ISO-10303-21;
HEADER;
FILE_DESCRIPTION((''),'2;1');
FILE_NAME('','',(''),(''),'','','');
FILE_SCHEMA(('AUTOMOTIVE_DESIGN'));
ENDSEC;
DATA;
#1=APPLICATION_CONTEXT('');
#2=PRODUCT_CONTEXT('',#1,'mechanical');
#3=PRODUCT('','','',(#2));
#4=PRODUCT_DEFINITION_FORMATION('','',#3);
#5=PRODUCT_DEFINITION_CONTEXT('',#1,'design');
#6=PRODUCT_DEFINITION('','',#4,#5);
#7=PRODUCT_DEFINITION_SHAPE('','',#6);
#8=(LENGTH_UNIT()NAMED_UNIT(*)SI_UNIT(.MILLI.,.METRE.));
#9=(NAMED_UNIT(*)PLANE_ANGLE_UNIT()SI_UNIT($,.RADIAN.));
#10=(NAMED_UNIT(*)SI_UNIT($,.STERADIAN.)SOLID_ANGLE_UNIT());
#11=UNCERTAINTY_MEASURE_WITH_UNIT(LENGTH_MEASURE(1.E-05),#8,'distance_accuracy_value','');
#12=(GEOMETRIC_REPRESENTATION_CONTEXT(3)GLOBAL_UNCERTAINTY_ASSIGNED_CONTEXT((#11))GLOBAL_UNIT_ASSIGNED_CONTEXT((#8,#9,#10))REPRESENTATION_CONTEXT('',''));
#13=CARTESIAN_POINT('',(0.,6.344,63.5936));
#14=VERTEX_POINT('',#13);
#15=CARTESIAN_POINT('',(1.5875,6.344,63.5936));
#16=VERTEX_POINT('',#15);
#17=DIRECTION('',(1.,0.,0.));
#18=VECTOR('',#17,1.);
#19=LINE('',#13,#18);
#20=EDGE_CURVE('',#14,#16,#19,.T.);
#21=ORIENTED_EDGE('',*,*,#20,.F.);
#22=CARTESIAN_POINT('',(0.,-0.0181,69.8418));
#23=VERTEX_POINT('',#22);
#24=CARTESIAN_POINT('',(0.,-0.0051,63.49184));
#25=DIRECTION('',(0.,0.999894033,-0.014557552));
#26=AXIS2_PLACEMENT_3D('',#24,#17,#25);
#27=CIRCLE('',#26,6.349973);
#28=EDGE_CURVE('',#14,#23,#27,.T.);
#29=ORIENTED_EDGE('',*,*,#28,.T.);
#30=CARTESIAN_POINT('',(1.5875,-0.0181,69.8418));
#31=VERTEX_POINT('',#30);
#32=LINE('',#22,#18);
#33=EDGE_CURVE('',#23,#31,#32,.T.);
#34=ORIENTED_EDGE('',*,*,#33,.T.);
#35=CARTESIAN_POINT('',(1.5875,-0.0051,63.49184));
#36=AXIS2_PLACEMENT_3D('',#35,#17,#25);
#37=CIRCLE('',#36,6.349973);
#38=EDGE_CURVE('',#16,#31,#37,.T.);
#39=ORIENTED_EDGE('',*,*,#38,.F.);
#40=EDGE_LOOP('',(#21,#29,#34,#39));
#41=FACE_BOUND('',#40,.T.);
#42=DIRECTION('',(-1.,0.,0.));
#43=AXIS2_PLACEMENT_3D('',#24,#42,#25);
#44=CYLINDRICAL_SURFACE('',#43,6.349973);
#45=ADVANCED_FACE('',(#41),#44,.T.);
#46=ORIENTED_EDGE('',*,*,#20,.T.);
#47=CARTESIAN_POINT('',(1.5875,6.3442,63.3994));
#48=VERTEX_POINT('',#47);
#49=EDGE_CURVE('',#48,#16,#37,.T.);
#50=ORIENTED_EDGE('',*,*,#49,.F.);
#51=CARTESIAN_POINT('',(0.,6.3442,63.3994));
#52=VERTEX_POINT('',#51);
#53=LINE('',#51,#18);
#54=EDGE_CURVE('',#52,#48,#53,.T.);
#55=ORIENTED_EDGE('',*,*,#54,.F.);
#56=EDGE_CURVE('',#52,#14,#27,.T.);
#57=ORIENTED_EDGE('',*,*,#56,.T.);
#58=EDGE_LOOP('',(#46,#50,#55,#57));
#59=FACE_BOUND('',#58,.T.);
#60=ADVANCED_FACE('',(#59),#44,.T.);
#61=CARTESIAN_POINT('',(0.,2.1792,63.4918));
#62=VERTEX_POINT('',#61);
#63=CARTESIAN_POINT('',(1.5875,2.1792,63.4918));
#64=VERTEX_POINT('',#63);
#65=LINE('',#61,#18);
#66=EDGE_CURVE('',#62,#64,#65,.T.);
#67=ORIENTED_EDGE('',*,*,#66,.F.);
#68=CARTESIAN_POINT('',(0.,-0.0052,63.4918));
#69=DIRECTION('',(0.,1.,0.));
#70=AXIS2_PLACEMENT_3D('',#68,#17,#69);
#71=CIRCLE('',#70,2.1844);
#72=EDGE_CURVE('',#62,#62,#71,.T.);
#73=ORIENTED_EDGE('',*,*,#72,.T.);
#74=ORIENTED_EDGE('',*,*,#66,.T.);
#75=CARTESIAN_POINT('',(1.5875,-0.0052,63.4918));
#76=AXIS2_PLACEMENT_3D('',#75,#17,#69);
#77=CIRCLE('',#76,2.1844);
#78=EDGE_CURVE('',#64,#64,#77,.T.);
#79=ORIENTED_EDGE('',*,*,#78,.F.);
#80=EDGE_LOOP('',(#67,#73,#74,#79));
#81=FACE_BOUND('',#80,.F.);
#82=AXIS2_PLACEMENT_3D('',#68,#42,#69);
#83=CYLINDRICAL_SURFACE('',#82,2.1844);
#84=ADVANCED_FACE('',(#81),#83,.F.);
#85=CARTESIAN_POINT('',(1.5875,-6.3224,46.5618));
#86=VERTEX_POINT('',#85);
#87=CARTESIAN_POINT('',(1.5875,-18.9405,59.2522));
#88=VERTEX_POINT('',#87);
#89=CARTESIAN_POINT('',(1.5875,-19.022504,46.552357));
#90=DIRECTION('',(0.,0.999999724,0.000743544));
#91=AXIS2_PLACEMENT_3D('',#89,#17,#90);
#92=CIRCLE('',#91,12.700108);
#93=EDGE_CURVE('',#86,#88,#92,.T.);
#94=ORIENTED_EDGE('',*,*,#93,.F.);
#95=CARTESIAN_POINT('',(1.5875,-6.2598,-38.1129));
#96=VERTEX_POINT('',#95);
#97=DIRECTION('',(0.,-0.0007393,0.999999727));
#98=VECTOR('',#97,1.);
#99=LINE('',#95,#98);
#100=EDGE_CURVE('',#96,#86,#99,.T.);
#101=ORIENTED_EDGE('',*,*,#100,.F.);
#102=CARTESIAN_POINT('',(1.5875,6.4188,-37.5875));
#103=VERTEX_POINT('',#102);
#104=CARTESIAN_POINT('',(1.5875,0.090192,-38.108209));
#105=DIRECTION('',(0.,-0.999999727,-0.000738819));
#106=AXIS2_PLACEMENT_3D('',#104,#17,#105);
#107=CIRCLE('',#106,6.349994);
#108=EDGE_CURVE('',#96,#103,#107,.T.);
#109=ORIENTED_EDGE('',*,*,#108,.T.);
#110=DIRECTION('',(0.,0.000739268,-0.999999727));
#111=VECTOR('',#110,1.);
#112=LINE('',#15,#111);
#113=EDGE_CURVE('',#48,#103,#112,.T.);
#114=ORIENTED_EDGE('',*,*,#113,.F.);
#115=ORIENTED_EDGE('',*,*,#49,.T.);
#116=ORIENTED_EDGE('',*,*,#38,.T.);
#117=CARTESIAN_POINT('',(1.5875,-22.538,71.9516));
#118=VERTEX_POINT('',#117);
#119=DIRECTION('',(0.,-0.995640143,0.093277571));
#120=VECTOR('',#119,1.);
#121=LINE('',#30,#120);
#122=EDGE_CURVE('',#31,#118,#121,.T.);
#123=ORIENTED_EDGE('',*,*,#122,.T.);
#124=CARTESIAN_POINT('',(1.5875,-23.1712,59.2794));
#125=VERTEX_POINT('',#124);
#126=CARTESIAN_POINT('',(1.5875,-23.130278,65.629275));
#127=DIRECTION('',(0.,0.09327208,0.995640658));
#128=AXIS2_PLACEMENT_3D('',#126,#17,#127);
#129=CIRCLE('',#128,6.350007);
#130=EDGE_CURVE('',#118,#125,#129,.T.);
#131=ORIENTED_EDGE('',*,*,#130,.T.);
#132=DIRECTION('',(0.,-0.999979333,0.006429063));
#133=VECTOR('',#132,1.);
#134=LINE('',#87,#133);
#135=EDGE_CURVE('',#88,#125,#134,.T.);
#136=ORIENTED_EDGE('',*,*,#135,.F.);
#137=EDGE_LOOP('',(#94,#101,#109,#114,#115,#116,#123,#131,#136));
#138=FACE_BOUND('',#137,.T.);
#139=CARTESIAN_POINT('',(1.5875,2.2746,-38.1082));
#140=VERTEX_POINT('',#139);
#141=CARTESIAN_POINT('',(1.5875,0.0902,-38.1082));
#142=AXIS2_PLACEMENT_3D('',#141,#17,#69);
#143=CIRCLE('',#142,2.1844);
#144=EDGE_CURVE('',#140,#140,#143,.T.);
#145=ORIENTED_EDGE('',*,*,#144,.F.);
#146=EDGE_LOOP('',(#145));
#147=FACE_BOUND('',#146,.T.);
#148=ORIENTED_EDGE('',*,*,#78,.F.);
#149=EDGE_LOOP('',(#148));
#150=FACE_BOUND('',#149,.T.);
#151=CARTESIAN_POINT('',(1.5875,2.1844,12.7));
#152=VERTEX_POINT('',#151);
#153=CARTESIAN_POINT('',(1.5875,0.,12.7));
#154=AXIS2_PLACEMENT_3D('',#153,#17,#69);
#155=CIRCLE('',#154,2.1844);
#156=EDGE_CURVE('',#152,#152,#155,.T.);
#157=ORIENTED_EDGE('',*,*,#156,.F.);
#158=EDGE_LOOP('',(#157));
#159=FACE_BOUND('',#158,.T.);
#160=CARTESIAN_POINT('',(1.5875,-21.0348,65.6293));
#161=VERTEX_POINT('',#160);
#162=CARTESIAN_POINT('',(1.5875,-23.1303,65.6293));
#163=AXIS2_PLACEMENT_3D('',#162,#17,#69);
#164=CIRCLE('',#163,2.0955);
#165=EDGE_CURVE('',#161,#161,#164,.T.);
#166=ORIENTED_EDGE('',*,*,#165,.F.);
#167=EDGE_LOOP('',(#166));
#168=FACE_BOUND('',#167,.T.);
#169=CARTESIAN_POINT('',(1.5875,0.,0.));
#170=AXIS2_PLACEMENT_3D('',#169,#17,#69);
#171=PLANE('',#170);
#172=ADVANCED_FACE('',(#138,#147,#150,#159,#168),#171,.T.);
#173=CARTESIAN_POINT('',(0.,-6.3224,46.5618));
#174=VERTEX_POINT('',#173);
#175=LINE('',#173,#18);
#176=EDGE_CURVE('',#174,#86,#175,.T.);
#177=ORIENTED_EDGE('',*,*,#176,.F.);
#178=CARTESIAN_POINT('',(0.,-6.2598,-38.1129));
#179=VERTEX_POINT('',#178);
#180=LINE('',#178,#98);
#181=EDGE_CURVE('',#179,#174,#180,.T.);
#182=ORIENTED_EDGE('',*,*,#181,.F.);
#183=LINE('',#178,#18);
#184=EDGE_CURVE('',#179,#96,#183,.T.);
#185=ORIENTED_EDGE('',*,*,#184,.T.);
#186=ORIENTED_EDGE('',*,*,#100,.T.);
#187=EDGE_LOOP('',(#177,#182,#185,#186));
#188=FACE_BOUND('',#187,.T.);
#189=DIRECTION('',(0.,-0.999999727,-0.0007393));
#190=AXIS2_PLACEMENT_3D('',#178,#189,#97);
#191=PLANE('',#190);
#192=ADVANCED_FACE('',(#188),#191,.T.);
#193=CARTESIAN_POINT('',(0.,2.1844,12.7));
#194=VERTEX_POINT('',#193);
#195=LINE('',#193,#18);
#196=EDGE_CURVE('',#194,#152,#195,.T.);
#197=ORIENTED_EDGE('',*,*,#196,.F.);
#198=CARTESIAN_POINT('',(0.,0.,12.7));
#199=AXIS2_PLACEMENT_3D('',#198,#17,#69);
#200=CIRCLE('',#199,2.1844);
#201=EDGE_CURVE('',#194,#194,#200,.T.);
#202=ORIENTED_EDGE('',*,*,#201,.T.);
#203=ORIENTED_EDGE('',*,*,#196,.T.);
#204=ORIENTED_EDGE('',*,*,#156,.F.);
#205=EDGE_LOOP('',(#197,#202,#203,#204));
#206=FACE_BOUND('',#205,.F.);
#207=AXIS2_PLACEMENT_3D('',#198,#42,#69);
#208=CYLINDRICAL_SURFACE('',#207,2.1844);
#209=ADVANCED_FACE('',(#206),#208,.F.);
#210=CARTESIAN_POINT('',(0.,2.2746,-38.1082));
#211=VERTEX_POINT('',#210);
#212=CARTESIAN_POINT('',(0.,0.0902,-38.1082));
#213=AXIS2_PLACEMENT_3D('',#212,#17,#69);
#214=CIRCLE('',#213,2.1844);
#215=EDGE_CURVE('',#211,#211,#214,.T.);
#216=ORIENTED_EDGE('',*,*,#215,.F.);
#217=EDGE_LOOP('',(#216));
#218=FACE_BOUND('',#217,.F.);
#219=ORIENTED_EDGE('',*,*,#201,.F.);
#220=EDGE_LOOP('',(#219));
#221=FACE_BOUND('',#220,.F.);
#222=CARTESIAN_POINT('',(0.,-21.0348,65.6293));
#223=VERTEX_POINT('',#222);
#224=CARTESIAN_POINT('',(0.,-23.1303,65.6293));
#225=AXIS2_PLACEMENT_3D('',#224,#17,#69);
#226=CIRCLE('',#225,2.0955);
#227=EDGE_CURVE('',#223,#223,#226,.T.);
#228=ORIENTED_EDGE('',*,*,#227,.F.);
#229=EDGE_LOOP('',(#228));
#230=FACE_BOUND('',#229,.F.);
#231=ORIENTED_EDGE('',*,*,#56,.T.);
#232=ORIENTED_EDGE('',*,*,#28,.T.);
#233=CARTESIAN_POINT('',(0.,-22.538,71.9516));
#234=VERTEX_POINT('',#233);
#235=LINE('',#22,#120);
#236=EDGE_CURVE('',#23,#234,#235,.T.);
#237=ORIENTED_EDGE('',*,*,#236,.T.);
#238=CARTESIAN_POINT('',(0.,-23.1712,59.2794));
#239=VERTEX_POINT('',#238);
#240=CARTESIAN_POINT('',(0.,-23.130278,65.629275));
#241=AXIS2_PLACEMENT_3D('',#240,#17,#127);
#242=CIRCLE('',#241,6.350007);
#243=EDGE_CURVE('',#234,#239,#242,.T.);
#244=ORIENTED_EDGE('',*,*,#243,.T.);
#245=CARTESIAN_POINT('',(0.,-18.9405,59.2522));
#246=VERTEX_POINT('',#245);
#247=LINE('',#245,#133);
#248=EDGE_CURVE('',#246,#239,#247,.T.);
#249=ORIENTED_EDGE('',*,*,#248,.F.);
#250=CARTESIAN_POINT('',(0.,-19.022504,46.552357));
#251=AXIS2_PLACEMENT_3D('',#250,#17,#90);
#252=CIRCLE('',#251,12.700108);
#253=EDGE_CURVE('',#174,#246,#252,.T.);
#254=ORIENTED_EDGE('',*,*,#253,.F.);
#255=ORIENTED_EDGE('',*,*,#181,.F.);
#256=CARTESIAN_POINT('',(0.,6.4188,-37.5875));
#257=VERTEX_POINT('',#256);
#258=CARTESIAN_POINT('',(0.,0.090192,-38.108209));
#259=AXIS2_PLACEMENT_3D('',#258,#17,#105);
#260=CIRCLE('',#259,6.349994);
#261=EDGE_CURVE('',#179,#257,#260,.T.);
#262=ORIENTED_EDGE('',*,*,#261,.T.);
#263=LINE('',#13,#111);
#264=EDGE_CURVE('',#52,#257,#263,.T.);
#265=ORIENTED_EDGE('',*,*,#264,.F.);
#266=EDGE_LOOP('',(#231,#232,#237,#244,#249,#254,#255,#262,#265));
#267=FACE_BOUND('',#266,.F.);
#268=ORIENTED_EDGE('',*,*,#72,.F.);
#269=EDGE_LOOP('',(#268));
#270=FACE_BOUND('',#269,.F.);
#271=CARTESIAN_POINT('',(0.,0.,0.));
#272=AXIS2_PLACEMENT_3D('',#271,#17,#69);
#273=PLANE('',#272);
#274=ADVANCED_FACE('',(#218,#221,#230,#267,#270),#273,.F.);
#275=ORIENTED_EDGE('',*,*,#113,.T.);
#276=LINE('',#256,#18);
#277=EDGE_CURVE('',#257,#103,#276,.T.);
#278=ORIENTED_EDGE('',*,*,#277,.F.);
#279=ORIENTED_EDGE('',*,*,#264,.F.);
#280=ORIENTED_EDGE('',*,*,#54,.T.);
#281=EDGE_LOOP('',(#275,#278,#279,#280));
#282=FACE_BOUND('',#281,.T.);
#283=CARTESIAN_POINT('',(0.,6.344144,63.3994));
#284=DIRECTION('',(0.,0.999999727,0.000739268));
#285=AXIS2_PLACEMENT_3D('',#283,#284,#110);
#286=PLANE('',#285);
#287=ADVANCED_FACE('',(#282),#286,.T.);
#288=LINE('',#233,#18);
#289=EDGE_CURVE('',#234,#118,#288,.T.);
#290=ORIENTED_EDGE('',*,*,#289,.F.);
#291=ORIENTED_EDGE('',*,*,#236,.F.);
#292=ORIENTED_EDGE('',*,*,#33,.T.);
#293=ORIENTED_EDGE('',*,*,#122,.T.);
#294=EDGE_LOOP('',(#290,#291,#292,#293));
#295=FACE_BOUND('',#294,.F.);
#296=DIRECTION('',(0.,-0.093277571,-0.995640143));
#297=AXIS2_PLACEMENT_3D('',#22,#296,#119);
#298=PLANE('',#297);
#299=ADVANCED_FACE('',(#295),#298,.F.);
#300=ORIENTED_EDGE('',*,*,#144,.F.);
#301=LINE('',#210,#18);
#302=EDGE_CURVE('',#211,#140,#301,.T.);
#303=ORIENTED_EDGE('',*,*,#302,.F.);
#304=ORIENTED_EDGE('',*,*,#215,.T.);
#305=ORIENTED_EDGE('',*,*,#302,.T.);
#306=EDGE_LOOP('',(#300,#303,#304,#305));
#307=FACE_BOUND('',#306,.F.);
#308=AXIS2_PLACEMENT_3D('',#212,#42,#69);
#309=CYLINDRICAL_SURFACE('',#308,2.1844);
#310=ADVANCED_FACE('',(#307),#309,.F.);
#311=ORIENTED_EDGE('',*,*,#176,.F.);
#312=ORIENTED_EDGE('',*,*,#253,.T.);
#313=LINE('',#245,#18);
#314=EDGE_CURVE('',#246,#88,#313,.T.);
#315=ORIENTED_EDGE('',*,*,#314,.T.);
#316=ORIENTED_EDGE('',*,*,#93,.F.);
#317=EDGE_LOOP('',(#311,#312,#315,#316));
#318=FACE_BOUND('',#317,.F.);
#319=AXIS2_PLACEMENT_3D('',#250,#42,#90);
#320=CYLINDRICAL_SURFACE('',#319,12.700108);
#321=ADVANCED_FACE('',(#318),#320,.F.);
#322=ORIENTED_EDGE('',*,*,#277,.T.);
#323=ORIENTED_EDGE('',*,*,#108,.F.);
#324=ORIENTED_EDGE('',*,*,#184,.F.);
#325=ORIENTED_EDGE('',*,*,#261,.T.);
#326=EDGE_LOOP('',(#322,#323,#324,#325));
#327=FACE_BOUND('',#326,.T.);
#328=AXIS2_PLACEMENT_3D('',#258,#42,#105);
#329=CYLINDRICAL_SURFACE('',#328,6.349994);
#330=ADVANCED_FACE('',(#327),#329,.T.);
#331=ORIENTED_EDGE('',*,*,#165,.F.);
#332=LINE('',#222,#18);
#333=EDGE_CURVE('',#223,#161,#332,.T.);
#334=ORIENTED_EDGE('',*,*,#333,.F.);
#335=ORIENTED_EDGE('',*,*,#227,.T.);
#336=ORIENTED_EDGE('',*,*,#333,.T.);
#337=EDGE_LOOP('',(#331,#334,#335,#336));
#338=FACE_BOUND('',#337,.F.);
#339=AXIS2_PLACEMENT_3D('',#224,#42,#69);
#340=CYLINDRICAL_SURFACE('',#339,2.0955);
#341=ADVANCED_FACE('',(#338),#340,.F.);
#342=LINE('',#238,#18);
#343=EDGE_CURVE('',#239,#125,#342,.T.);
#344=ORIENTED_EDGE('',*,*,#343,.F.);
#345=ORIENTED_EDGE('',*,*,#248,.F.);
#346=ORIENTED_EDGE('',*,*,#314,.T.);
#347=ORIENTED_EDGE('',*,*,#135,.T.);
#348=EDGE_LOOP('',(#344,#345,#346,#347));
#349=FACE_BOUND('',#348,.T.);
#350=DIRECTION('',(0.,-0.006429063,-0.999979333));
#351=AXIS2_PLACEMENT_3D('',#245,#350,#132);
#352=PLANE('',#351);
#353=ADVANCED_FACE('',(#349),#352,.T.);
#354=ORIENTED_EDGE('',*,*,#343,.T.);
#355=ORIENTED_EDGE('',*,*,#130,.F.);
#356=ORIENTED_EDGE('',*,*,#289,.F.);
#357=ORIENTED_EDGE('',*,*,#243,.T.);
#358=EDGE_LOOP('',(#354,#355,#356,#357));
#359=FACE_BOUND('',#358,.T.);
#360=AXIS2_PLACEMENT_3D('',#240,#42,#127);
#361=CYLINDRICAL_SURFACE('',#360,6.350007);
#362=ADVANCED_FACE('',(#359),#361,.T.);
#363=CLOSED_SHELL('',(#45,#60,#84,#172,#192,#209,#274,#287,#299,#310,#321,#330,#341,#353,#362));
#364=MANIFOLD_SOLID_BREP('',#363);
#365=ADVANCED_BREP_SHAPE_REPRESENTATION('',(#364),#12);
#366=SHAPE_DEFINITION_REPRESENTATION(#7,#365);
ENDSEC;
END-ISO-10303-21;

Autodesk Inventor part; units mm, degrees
ref_plane "YZ Plane" through (0, 0, 0) normal (1, 0, 0) x (0, 1, 0)
ref_plane "XZ Plane" through (0, 0, 0) normal (0, 1, 0) x (-1, 0, 0)
ref_plane "XY Plane" through (0, 0, 0) normal (0, 0, 1) x (1, 0, 0)
sketch "main" plane through (0, 0, 0) normal (0, 0, 1) x (1, 0, 0)
  circle A0 centre (33.3097, -13.5548) radius 2.1844
  arc A1 (33.2126, -19.9041) -> (39.6597, -13.5466) centre (33.3097, -13.5548) ccw
  arc A2 (41.7862, 8.9717) -> (29.1145, 9.6144) centre (35.4643, 9.5687) ccw
  line L0 (39.6597, -13.5466) -> (41.7862, 8.9717)
  line L1 (-68.2903, -7.2251) -> (16.3844, -7.2251)
  line L2 (29.0841, 5.3837) -> (29.1145, 9.6144)
  arc A3 (16.3844, -7.2251) -> (29.0841, 5.3837) centre (16.3844, 5.4749) ccw
  circle A4 centre (35.4643, 9.5687) radius 2.0955
  line L3 (33.4068, -19.9041) -> (-67.7743, -19.9041)
  circle A5 centre (-68.2903, -13.5751) radius 2.1844
  circle A6 centre (-17.4821, -13.5224) radius 2.1844
  arc A7 (-68.2903, -7.2251) -> (-67.7743, -19.9041) centre (-68.2903, -13.5751) ccw
  point P0 (20.4908, -8.19)
  dimension "d0" = 12.7
  dimension "d1" = 12.7
  dimension "d2" = 12.7
  dimension "d3" = 4.191
  dimension "d7" = 4.3688
  dimension "d8" = 4.3688
  dimension "d9" = 12.7
sketch "Sketch1" plane through (0, 0, 0) normal (1, 0, 0) x (0, 1, 0)
  circle A0 centre (-0.0052, 63.4918) radius 2.1844
  arc A1 (6.3442, 63.3994) -> (-0.0181, 69.8418) centre (-0.0052, 63.4918) ccw
  arc A2 (-22.538, 71.9516) -> (-23.1712, 59.2794) centre (-23.1303, 65.6293) ccw
  line L0 (-0.0181, 69.8418) -> (-22.538, 71.9516)
  line L1 (-6.2598, -38.1129) -> (-6.3224, 46.5618)
  line L2 (-18.9405, 59.2522) -> (-23.1712, 59.2794)
  arc A3 (-6.3224, 46.5618) -> (-18.9405, 59.2522) centre (-19.0224, 46.5524) ccw
  circle A4 centre (-23.1303, 65.6293) radius 2.0955
  line L3 (6.344, 63.5936) -> (6.4188, -37.5875)
  circle A5 centre (0.0902, -38.1082) radius 2.1844
  circle A6 centre (0, 12.7) radius 2.1844
  arc A7 (-6.2598, -38.1129) -> (6.4188, -37.5875) centre (0.0902, -38.1082) ccw
  point P0 (0, 0)
extrude "Extrusion1" add sketch "Sketch1" along normal blind 1.5875
equation "\"BendRadius\" = Thickness"
equation "\"BendReliefWidth\" = Thickness"
equation "\"BendReliefDepth\" = 0.5 * Thickness"
equation "\"CornerReliefSize\" = 4 * Thickness"
equation "\"MinimumRemnant\" = 2 * Thickness"
equation "\"TransitionRadius\" = BendRadius"
equation "\"JacobiRadiusSize\" = BendRadius"
equation "\"GapSize\" = Thickness"
equation "\"Thickness\" = 1.5875"
properties part number "Passive Gusset" material "Acetal Resin, White"
